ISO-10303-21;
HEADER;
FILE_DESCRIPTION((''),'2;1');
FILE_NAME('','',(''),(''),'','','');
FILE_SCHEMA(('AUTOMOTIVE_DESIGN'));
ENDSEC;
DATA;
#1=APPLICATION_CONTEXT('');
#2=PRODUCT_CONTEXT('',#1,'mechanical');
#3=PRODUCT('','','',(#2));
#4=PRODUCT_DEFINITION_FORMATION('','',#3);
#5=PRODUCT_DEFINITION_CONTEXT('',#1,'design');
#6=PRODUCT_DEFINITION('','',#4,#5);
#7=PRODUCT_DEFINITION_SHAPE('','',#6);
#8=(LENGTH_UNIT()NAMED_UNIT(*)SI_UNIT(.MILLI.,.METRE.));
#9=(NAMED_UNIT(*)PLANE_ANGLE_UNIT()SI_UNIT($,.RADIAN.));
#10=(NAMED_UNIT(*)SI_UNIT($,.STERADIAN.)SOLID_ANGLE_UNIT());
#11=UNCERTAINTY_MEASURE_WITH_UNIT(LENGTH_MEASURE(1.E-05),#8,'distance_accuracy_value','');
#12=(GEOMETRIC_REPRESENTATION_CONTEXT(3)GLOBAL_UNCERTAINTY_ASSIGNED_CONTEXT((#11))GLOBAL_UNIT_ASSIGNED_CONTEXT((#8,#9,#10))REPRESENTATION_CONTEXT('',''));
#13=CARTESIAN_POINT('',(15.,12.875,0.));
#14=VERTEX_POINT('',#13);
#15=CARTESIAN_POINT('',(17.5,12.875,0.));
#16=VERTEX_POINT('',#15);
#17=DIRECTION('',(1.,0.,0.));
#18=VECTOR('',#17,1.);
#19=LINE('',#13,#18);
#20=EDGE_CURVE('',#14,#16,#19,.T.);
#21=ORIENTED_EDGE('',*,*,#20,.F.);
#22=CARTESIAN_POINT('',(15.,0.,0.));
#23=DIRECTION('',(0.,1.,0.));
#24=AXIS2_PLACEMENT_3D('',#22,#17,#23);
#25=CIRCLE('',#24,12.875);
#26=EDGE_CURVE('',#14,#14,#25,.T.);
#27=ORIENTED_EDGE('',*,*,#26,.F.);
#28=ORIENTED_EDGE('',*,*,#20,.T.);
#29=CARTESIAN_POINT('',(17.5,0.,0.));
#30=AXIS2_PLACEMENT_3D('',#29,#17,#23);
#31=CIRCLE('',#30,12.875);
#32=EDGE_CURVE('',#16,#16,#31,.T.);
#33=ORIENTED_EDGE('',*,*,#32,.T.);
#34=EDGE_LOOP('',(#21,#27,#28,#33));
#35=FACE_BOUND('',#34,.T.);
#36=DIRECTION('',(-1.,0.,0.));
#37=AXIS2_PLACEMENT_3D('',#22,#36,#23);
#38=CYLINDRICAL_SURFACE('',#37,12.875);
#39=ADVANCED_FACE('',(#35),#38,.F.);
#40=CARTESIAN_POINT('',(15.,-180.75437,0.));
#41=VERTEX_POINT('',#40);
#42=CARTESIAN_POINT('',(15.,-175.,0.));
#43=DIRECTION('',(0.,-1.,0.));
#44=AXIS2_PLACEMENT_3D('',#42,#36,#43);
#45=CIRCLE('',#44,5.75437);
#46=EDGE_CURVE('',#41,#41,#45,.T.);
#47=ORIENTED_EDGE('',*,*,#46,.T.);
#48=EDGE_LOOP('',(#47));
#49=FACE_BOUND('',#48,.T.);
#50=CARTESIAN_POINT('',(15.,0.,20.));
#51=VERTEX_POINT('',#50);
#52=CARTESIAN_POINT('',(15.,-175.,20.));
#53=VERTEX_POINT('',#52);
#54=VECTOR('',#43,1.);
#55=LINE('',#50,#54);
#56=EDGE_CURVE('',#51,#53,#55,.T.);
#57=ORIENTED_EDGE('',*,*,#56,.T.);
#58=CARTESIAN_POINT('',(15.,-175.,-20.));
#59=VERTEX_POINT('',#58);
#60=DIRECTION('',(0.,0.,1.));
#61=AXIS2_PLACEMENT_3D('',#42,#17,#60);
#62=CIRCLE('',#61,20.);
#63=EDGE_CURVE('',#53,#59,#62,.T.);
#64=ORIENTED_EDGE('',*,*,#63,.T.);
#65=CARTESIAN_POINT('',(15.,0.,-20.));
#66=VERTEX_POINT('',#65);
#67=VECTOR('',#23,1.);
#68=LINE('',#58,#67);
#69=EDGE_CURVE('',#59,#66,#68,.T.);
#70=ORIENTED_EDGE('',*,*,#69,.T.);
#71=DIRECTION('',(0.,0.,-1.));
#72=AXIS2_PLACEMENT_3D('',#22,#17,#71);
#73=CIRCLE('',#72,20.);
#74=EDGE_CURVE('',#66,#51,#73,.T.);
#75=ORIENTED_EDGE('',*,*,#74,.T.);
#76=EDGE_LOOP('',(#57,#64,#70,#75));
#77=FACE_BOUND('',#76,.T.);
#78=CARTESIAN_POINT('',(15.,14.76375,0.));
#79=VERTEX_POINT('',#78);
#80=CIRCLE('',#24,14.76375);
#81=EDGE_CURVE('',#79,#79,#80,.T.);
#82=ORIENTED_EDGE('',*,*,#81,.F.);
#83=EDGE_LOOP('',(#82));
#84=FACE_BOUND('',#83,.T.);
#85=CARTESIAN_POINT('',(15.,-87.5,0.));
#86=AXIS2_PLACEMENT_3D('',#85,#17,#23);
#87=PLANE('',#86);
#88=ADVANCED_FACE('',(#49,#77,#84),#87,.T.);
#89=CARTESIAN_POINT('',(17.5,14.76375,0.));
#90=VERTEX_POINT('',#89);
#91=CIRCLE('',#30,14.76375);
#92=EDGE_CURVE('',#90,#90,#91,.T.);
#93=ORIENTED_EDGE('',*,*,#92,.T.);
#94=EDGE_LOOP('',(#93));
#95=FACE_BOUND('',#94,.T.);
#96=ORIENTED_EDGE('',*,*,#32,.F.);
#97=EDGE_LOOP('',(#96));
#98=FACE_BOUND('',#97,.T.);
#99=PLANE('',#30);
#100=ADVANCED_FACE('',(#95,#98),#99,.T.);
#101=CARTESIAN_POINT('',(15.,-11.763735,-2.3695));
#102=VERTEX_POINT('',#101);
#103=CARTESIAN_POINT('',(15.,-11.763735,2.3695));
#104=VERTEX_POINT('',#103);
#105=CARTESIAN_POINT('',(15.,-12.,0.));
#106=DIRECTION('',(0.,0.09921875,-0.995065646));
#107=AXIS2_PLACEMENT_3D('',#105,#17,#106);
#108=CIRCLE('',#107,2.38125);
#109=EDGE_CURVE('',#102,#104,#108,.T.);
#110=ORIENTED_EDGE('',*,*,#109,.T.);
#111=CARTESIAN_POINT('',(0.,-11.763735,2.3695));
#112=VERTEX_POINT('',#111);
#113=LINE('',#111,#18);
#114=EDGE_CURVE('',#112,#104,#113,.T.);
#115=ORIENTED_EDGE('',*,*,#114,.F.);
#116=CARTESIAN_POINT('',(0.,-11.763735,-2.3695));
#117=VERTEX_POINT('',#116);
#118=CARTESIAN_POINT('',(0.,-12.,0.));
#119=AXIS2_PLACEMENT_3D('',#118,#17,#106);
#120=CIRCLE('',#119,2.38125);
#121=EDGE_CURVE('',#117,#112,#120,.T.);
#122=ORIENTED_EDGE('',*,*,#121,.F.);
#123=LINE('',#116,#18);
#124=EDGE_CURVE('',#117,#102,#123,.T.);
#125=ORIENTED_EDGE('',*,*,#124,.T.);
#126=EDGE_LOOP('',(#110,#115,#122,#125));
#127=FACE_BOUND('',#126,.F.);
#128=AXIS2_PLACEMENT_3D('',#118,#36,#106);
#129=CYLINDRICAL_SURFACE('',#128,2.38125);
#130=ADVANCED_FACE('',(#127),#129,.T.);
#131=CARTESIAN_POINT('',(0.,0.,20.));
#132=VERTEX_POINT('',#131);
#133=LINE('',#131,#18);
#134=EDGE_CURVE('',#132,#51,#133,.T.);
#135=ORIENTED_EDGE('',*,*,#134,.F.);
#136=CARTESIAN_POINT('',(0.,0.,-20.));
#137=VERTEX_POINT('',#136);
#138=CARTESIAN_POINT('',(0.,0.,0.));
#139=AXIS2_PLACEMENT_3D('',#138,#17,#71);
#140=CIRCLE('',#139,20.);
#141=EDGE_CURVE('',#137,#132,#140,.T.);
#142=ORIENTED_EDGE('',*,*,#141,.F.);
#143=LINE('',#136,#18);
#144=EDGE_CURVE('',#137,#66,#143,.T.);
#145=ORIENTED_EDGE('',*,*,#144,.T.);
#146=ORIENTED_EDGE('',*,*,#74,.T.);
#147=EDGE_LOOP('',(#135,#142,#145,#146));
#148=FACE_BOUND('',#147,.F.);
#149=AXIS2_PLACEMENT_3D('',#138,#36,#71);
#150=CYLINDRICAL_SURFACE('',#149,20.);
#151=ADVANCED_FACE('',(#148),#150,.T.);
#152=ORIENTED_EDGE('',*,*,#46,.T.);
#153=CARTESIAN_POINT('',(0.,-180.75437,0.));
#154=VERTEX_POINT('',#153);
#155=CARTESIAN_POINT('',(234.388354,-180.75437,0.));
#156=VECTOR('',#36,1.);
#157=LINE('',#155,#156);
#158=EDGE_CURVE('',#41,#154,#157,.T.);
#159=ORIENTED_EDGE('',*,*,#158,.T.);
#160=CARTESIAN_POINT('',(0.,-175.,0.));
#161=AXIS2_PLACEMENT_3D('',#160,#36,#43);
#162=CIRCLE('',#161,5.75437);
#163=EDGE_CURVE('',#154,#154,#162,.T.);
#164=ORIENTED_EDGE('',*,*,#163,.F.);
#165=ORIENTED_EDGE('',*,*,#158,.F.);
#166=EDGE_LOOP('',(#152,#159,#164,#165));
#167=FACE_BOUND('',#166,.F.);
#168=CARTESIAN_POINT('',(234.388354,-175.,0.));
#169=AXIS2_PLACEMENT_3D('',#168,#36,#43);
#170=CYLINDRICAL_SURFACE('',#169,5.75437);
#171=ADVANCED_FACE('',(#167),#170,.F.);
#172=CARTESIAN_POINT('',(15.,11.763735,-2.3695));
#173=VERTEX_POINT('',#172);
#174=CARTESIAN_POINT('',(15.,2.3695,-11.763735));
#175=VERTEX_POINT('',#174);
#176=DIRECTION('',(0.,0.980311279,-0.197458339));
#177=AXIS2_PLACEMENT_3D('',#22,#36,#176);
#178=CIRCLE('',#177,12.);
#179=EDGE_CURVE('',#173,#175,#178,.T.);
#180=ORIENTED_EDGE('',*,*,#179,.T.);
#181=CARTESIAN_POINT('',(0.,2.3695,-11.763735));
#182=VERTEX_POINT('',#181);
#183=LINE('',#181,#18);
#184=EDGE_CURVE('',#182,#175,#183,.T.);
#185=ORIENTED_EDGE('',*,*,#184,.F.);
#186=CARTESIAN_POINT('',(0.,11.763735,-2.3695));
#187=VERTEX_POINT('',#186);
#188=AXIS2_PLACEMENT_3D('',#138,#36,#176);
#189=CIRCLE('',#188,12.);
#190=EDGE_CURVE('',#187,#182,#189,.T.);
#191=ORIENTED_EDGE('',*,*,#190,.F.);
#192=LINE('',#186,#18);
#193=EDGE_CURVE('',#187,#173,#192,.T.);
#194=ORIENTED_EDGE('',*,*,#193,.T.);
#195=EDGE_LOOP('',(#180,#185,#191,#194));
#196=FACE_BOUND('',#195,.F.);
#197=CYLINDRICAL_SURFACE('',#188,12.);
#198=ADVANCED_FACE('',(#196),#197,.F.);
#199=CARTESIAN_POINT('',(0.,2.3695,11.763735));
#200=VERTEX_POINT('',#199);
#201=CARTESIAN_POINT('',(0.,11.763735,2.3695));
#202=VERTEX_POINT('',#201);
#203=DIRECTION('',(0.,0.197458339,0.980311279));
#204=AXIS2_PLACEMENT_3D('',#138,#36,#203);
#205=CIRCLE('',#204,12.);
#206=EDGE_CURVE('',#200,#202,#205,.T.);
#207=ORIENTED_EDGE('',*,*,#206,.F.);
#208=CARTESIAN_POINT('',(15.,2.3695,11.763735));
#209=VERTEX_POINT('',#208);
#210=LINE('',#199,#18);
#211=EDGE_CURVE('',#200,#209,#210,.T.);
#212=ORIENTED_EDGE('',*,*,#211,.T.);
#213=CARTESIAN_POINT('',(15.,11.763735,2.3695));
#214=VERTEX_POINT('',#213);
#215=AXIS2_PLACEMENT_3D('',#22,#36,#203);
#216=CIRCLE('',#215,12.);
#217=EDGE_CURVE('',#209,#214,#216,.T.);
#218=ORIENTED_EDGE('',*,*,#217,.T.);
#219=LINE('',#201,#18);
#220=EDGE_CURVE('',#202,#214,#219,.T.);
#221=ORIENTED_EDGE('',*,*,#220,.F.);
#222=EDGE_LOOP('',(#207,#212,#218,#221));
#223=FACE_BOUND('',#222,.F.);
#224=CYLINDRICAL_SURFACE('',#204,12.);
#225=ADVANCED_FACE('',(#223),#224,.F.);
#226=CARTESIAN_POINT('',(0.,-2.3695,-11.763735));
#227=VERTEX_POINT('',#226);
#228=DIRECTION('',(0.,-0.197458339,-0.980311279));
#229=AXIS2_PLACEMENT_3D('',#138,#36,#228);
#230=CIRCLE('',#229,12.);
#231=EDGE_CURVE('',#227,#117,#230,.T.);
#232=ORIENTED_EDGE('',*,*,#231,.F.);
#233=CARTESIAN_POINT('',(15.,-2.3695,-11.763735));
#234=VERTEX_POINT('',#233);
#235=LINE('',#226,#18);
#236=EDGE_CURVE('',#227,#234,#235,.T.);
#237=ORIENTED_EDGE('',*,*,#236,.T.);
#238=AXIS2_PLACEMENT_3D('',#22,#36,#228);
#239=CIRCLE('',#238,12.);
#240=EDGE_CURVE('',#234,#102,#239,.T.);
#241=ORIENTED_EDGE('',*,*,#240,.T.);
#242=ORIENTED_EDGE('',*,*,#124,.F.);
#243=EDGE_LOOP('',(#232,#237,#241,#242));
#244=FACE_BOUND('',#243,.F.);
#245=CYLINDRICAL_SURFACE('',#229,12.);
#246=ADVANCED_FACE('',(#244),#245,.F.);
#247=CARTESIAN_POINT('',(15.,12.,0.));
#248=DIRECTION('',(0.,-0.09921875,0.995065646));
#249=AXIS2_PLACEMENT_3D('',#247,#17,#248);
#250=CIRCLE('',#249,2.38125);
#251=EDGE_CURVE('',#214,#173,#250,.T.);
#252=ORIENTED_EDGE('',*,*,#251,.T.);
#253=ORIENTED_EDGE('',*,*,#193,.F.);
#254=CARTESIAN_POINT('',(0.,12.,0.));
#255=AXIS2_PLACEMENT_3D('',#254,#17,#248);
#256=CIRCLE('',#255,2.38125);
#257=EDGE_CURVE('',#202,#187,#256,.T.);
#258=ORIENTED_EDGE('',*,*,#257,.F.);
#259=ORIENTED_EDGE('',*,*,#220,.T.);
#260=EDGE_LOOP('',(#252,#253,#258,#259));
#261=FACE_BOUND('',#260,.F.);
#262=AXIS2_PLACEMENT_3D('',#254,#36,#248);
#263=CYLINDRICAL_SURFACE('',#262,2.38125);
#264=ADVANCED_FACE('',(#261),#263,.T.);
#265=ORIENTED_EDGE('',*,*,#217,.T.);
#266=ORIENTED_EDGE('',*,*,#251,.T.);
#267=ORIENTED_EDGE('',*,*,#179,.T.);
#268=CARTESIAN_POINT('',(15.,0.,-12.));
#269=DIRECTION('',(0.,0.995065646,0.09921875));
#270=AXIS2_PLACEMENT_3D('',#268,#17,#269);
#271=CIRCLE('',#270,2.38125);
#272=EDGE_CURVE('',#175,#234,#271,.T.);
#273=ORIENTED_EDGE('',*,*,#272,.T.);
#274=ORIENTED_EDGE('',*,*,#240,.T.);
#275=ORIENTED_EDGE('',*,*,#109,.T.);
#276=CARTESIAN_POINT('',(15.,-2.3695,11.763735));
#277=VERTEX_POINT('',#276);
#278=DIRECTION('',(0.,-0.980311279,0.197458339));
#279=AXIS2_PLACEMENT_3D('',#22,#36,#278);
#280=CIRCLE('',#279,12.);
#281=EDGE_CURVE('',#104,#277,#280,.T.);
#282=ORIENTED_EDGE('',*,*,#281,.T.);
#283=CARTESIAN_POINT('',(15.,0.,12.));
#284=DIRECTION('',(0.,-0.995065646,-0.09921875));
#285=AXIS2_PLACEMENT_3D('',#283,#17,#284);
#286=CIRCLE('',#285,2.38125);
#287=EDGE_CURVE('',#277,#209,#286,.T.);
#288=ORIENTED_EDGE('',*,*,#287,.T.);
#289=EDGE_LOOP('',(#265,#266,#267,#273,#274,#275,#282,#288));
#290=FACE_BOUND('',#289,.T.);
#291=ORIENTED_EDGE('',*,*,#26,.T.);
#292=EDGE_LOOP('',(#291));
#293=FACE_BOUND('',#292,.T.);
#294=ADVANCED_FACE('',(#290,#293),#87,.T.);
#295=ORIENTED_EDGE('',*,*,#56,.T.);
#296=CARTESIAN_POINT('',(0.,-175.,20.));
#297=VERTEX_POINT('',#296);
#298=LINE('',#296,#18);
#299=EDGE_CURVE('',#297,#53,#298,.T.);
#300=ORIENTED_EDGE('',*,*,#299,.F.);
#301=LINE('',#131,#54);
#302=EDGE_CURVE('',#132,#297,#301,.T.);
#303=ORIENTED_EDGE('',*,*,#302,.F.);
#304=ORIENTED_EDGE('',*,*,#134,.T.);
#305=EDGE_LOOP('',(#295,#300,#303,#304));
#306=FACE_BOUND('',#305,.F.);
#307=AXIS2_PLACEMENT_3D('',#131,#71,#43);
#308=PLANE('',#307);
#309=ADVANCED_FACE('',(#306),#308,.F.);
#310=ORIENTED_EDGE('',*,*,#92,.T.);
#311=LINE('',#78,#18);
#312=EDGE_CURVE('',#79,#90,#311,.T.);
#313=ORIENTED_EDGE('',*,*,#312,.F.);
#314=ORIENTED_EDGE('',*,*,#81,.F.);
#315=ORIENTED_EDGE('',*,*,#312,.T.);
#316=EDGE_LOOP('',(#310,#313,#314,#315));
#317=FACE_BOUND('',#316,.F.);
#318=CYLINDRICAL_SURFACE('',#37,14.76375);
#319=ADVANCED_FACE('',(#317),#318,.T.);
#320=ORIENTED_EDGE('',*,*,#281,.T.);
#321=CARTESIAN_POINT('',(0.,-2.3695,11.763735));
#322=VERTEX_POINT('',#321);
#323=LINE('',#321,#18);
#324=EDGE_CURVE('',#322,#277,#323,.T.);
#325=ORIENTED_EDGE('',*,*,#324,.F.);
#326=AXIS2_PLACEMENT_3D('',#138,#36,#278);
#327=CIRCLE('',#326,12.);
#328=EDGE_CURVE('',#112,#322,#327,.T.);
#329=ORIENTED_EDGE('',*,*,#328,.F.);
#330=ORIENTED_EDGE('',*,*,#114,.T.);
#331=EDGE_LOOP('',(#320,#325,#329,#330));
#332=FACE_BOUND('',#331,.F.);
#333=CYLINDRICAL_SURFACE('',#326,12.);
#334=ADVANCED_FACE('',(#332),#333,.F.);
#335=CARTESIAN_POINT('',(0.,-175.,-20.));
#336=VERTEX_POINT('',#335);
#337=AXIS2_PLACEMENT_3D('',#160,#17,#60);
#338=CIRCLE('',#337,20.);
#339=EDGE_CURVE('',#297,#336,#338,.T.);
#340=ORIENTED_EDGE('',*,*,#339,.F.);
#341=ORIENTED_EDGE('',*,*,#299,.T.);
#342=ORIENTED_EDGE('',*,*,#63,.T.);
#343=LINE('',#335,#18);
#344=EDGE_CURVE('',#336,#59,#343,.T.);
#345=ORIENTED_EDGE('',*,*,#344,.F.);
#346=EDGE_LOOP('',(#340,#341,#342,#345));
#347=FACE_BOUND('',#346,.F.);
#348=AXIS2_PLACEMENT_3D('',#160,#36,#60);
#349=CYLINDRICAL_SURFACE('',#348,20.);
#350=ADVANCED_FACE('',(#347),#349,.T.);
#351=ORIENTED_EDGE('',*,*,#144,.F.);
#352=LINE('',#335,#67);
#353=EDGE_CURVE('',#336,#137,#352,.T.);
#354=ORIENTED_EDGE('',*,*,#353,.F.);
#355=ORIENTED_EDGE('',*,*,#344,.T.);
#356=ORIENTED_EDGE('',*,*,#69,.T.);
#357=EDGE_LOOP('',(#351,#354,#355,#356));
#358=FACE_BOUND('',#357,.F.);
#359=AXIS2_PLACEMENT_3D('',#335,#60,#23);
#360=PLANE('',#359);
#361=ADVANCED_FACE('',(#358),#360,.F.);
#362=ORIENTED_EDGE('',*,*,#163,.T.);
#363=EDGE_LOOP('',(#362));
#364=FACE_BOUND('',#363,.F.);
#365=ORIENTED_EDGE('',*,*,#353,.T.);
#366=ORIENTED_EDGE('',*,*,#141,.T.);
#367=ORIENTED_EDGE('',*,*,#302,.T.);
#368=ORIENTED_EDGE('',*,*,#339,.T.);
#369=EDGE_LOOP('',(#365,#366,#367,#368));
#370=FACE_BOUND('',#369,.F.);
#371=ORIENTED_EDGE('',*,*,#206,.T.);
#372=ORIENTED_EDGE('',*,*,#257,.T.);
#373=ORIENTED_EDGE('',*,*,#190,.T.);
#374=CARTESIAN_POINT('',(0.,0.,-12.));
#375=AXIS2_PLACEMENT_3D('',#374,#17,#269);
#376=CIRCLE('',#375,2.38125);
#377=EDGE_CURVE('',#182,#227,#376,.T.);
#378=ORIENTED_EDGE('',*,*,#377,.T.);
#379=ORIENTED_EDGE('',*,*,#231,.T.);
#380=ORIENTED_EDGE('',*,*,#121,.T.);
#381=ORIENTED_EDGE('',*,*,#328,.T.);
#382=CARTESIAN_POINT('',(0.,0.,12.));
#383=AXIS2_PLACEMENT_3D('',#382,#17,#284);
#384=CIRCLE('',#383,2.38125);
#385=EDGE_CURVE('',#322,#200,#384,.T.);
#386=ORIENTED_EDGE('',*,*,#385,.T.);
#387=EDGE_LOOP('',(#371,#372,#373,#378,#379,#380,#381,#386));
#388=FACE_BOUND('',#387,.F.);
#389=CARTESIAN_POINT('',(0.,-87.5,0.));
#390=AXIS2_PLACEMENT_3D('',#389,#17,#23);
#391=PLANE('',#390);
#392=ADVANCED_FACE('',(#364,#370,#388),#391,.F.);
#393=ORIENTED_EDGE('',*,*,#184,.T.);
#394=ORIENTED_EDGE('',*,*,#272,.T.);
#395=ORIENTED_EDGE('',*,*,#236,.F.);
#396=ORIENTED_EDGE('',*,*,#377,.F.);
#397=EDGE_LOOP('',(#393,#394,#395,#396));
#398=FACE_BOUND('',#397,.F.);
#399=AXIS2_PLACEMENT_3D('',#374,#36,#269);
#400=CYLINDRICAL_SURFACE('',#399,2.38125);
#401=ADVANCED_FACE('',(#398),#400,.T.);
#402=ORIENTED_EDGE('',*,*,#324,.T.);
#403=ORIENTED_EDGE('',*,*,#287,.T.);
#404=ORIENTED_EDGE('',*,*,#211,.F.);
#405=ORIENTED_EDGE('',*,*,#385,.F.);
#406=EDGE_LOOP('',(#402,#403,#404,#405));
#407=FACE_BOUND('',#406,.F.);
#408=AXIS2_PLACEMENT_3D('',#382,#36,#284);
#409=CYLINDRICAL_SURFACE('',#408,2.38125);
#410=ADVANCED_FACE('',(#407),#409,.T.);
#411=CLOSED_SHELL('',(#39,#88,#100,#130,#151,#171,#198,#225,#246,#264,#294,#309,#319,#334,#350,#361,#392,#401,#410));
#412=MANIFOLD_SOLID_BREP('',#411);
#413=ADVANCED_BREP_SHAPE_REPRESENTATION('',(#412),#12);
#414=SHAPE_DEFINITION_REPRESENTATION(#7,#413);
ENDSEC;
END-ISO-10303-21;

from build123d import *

# Parameters (mm, degrees)
F1_DEPTH = 15
F2_R     = 14.76375
F2_R_2   = 12.875
F3_DEPTH = 2.5
F5_D     = 11.50874


with BuildPart() as f1:
    # F0 (on Right) → F1 (new body)
    with BuildSketch(Plane.YZ):
        with BuildLine():
            Line((-175, -20), (0, -20))
            ThreePointArc((0, -20), (20, 0), (0, 20))
            Line((0, 20), (-175, 20))
            ThreePointArc((-175, 20), (-195, 0), (-175, -20))
        make_face()
        with BuildLine():
            ThreePointArc((-11.7637353516, 2.3695000693), (-8.4852813742, 8.4852813742), (-2.3695000693, 11.7637353516))
            ThreePointArc((-2.3695000693, 11.7637353516), (0, 9.61875), (2.3695000693, 11.7637353516))
            ThreePointArc((2.3695000693, 11.7637353516), (8.4852813742, 8.4852813742), (11.7637353516, 2.3695000693))
            ThreePointArc((11.7637353516, 2.3695000693), (9.61875, 0), (11.7637353516, -2.3695000693))
            ThreePointArc((11.7637353516, -2.3695000693), (8.4852813742, -8.4852813742), (2.3695000693, -11.7637353516))
            ThreePointArc((2.3695000693, -11.7637353516), (0, -9.61875), (-2.3695000693, -11.7637353516))
            ThreePointArc((-2.3695000693, -11.7637353516), (-8.4852813742, -8.4852813742), (-11.7637353516, -2.3695000693))
            ThreePointArc((-11.7637353516, -2.3695000693), (-9.61875, 0), (-11.7637353516, 2.3695000693))
        make_face(mode=Mode.SUBTRACT)
    extrude(amount=F1_DEPTH)

    # F2 (on face) → F3 (join)
    with BuildSketch(Plane.YZ.offset(15)):
        Circle(F2_R)
        Circle(F2_R_2, mode=Mode.SUBTRACT)
    extrude(amount=F3_DEPTH)

    # F5 (through all)
    with Locations(Plane.YZ.offset(15)):
        with Locations((-175, 0)):
            Hole(F5_D / 2)


solid = f1.part
